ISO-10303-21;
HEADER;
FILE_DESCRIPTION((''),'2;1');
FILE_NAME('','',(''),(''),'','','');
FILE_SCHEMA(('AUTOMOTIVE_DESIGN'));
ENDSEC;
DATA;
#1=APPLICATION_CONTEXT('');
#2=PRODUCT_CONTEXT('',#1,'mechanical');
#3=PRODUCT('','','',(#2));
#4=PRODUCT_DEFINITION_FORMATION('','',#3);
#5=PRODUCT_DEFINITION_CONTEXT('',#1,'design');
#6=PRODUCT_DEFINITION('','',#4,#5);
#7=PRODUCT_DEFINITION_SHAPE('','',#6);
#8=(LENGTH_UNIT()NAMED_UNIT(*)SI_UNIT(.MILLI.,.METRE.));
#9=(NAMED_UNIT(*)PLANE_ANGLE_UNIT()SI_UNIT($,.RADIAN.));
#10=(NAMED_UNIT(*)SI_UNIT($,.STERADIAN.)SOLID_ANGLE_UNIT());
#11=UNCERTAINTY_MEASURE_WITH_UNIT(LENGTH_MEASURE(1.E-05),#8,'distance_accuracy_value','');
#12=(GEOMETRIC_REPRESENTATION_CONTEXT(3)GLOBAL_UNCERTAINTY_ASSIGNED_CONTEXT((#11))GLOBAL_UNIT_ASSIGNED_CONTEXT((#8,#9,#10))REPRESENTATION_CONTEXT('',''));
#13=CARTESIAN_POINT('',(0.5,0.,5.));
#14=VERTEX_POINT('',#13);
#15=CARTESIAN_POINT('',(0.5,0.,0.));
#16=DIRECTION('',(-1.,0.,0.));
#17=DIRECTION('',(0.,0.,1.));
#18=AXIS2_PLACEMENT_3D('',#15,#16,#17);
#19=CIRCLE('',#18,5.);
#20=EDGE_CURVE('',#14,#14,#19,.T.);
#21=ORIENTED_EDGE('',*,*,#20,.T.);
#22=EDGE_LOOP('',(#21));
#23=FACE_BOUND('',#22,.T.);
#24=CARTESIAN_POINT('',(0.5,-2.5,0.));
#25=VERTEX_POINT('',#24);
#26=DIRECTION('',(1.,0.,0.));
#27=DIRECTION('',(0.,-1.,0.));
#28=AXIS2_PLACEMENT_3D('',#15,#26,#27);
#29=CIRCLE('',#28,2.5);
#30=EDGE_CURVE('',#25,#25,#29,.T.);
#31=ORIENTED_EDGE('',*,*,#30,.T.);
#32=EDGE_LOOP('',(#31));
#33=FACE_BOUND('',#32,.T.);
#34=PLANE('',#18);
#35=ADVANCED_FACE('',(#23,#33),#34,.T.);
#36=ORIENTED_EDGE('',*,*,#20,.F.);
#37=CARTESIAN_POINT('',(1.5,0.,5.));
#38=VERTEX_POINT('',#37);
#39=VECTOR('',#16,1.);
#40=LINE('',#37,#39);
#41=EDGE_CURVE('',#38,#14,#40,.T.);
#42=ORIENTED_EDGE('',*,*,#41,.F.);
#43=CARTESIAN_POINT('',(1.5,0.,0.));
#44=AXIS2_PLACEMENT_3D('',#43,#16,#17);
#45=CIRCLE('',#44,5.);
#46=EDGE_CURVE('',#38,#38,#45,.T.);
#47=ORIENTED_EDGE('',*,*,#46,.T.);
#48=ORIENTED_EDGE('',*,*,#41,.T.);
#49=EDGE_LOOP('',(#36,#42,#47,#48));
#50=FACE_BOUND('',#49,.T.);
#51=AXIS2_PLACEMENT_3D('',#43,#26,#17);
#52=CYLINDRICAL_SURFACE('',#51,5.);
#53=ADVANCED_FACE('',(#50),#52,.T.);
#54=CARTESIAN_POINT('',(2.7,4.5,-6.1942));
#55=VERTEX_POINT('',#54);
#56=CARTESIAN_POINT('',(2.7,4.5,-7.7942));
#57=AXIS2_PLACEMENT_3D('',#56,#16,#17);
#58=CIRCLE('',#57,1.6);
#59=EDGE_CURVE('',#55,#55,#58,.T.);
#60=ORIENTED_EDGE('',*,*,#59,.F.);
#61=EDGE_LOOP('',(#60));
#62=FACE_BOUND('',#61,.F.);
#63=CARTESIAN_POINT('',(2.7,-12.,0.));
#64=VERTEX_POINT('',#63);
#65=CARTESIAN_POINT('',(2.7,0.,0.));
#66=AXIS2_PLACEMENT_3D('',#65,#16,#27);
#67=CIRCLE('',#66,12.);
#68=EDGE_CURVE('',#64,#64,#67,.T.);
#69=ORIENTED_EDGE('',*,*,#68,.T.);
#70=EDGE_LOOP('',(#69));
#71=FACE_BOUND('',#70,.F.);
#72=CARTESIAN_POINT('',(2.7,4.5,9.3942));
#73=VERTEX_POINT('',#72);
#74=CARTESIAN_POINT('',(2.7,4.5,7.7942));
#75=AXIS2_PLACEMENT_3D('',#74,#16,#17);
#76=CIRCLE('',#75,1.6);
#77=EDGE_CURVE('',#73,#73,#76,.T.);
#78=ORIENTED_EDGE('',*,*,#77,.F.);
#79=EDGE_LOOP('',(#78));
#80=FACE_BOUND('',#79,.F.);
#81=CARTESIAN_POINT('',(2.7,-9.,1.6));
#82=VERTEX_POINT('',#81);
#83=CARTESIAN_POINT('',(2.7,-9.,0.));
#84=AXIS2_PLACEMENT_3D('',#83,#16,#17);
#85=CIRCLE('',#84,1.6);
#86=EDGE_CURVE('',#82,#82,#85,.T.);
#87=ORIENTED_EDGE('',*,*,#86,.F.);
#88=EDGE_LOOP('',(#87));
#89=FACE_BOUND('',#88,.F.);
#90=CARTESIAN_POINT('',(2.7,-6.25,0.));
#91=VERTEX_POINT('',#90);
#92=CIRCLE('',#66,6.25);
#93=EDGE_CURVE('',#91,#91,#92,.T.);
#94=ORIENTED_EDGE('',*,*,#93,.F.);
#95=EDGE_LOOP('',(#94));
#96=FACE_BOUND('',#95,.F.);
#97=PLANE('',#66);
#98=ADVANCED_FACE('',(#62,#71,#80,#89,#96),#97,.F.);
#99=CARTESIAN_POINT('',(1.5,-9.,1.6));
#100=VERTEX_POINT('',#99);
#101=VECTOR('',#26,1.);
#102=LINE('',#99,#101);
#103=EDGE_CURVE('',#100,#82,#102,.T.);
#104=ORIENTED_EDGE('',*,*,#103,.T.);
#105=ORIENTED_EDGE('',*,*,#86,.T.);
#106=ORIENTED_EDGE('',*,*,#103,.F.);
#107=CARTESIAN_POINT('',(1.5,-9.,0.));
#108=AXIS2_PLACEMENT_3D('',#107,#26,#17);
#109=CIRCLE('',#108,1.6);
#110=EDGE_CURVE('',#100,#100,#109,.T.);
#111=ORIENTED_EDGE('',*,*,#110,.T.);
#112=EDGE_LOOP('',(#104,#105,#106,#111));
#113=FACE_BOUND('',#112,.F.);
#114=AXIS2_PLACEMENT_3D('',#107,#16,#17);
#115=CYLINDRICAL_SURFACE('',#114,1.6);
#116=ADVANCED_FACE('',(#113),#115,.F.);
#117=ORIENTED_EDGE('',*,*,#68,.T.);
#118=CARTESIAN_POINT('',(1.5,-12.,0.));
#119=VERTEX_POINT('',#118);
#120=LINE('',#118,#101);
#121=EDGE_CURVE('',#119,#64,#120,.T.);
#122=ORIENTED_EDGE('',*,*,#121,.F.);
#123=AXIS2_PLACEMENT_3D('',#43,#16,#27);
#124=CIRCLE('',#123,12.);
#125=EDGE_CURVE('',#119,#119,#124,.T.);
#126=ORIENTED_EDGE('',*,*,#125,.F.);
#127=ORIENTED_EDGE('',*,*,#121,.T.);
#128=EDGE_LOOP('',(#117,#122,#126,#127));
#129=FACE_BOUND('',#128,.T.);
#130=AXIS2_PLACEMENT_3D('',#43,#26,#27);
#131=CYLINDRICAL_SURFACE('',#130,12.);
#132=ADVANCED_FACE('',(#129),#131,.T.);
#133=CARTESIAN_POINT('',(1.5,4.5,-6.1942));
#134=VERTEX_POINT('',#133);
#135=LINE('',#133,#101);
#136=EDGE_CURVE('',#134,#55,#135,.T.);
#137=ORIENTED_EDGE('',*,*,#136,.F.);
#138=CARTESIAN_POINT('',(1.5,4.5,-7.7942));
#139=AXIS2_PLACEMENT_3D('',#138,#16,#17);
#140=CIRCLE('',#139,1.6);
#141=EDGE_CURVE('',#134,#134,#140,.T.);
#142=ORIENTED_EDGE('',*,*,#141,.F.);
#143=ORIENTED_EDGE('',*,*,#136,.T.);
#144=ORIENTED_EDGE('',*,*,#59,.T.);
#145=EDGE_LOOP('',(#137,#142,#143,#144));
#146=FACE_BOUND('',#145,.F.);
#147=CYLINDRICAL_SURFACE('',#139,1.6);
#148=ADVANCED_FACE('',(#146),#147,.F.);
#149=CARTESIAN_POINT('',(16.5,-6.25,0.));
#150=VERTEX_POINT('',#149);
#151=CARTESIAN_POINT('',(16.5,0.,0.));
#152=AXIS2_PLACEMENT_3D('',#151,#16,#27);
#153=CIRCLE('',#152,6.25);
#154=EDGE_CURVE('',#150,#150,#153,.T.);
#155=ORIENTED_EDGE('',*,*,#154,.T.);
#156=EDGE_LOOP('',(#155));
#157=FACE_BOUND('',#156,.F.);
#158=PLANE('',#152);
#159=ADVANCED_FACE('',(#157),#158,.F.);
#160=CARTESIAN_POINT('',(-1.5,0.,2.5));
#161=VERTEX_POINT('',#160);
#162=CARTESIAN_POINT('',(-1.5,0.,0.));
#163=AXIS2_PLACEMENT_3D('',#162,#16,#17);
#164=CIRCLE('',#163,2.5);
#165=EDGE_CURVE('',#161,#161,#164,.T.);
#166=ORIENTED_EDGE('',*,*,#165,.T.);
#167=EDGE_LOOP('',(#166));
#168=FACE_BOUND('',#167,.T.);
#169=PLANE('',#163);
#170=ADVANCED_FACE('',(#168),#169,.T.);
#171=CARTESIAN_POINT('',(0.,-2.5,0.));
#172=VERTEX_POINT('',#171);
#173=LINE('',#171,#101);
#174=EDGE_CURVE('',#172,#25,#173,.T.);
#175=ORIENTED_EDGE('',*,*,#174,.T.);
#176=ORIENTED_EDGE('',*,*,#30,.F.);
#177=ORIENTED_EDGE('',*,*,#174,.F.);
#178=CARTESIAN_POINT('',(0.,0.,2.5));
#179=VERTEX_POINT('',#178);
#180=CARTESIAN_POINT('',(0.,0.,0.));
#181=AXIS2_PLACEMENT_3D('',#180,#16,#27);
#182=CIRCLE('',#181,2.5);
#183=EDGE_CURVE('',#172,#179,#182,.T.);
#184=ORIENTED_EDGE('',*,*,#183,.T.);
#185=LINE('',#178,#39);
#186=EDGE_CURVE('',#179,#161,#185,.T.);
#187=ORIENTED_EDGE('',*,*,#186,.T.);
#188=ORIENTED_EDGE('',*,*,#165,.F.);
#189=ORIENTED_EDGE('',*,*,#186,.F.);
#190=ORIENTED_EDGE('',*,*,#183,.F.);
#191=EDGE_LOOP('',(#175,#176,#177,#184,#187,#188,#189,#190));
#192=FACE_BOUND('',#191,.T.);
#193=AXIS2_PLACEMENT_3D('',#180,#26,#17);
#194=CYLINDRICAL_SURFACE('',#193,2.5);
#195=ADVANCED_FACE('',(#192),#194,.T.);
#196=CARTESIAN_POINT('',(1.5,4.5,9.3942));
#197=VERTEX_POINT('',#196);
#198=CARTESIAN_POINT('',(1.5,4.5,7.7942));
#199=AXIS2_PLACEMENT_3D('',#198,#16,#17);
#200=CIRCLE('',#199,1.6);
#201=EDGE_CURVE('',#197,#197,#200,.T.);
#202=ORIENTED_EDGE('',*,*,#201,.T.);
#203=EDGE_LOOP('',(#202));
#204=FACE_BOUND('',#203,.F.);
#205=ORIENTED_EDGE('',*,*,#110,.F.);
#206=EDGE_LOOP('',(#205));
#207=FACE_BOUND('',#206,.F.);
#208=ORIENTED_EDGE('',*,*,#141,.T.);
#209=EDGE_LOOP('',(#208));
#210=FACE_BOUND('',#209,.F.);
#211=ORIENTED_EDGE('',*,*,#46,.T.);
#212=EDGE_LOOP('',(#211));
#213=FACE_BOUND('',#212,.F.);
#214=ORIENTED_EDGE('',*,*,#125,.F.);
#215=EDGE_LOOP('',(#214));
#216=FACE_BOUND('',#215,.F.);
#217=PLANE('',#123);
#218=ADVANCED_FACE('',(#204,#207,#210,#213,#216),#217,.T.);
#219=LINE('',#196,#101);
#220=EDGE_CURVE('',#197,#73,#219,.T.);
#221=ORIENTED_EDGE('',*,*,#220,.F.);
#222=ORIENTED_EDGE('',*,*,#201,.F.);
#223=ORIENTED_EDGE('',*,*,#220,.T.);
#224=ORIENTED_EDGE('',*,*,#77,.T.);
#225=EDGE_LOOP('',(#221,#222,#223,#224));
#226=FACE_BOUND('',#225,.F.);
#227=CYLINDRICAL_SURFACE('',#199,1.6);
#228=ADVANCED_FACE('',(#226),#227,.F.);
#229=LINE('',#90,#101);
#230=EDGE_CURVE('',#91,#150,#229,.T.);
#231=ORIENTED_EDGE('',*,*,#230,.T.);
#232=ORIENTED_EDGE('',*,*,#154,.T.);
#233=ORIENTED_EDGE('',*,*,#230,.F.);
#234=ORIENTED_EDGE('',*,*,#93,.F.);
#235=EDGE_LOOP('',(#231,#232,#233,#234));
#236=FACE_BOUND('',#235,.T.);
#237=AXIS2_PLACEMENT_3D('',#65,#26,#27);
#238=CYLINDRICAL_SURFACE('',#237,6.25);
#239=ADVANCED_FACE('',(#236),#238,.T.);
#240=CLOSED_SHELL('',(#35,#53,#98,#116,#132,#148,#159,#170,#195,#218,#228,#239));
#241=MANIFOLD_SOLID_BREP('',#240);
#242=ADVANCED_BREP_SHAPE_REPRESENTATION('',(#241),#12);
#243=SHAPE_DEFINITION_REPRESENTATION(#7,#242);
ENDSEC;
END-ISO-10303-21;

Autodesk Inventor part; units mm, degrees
ref_plane "YZ Plane" through (0, 0, 0) normal (1, 0, 0) x (0, 1, 0)
ref_plane "XZ Plane" through (0, 0, 0) normal (0, 1, 0) x (-1, 0, 0)
ref_plane "XY Plane" through (0, 0, 0) normal (0, 0, 1) x (1, 0, 0)
sketch "Sketch1" plane through (0, 0, 0) normal (0, 0, 1) x (1, 0, 0)
  line L0 (2.7, -6.25) -> (16.5, -6.25)
  line L1 (16.5, -6.25) -> (16.5, 0)
  line L2 (16.5, 0) -> (0, 0)
  line L3 (0, 0) -> (0, -2.5)
  line L4 (0, -2.5) -> (1.5, -2.5)
  line L5 (1.5, -2.5) -> (1.5, -12)
  line L6 (1.5, -12) -> (2.7, -12)
  line L7 (2.7, -12) -> (2.7, -6.25)
  dimension "d0" = 6.25
  dimension "d1" = 15
  dimension "d2" = 1.2
  dimension "d3" = 12
  dimension "d4" = 2.5
  dimension "d5" = 1.5
revolve "Revolution1" add sketch "Sketch1" angle 360 about axis through (16.5, 0, 0) along (-1, 0, 0)
sketch "Sketch2" plane through (1.5, 0, 0) normal (-1, 0, 0) x (0, 0, 1)
  circle A0 centre (0, 0) radius 9 construction
  circle A1 centre (0, -9) radius 1.6
  line L0 (0, -16.8) -> (0, 16.8) projected
  circle A2 centre (7.7942, 4.5) radius 1.6
  circle A3 centre (-7.7942, 4.5) radius 1.6
  dimension "d7" = 18
  dimension "d8" = 3.2
  dimension "d11" = 360
extrude "Extrusion1" cut sketch "Sketch2" against normal blind 1.2
sketch "Sketch3" plane through (0, 0, 0) normal (-1, 0, 0) x (0, 0, 1)
  circle A0 centre (0, 0) radius 2.5 projected
  point P0 (0, 0)
extrude "Extrusion2" add sketch "Sketch3" along normal blind 1.5
sketch "Sketch4" plane through (1.5, 0, 0) normal (-1, 0, 0) x (0, 0, 1)
  circle A0 centre (0, 0) radius 5
  dimension "d17" = 10
extrude "Extrusion3" add sketch "Sketch4" along normal blind 1
properties part number "SRM-12-06A"
